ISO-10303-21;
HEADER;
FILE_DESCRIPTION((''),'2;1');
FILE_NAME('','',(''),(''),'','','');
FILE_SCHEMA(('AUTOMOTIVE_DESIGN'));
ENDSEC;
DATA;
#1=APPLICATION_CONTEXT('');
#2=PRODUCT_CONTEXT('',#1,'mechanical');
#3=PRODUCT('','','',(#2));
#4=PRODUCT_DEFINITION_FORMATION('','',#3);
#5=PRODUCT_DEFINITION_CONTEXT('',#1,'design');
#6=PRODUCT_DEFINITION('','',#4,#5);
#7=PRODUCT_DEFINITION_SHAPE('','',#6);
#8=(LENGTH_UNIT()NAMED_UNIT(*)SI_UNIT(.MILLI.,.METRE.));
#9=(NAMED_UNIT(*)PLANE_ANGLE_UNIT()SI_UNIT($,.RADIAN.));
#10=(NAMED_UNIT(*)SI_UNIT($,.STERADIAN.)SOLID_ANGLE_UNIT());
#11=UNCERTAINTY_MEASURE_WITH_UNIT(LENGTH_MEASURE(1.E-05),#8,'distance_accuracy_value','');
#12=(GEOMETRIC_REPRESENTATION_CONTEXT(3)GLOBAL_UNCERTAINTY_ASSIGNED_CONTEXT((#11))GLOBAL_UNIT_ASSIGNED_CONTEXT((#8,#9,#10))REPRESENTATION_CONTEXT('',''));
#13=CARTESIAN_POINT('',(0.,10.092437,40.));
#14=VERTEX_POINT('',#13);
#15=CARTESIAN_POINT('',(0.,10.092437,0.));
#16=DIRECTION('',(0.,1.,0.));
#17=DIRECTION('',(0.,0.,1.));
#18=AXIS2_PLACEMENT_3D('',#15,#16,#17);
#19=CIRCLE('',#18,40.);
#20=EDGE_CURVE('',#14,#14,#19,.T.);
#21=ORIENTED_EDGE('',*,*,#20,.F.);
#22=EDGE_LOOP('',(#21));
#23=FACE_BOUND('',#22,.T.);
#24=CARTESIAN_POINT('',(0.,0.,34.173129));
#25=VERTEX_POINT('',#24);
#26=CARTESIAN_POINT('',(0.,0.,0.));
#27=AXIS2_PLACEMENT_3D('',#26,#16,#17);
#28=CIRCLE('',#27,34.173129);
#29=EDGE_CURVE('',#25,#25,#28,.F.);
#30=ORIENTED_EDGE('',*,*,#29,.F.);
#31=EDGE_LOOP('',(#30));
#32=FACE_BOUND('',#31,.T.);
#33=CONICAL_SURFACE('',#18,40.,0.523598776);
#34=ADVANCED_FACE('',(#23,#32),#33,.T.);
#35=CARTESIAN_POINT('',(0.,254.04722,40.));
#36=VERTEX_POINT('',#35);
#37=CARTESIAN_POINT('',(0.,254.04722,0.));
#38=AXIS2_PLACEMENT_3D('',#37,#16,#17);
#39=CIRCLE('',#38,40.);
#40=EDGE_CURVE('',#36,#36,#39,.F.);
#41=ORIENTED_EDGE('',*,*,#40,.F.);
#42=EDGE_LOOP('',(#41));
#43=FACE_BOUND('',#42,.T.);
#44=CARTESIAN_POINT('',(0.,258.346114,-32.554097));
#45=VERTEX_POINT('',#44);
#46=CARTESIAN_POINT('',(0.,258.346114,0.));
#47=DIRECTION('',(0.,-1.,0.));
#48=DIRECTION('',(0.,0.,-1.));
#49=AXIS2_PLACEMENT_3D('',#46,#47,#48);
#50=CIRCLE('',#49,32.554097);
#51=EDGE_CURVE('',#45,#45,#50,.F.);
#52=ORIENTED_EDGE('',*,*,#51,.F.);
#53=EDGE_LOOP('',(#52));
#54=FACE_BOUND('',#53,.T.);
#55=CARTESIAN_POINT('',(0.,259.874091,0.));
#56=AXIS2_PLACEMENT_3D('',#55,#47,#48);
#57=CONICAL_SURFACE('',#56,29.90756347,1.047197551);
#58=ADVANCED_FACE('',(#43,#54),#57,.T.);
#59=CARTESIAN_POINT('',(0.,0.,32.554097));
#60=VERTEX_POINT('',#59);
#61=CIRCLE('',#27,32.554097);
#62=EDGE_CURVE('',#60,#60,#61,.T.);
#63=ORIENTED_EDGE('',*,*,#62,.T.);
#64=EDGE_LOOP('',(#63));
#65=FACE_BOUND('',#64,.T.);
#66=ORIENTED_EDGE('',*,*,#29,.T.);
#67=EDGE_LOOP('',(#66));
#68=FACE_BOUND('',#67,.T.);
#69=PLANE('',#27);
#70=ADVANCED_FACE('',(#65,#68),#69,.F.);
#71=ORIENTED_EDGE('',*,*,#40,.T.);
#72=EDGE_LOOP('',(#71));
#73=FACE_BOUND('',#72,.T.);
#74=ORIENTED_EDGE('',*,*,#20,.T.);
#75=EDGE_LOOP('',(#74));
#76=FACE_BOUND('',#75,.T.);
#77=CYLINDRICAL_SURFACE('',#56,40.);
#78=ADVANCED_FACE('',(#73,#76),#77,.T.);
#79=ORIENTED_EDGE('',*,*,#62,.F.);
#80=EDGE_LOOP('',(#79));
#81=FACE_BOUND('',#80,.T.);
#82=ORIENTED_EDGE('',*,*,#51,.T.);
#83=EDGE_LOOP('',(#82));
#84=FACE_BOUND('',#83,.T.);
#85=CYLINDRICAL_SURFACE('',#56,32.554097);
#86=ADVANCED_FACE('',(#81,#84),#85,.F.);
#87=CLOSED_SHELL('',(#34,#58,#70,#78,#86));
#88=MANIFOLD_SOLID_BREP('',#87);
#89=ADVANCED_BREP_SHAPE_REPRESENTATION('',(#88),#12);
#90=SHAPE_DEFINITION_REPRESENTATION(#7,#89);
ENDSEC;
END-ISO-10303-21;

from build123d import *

# Parameters (mm, degrees)
SKETCH1_R           = 40
BOSS_EXTRUDE1_DEPTH = 259.874091
SKETCH2_R           = 32.554097406
CUT_EXTRUDE1_DEPTH  = 266.95966456
CHAMFER1_SIZE       = 5.826871
CHAMFER1_SIZE_2     = 10.092437


with BuildPart() as part:
    # Sketch1 → Boss-Extrude1 (new body)
    with BuildSketch(Plane(origin=(0, 0, 0), x_dir=(1, 0, 0), z_dir=(0, 1, 0))):
        with Locations(Location((0, 0, 0), (0, 0, 270))):
            Circle(SKETCH1_R)
    extrude(amount=BOSS_EXTRUDE1_DEPTH)

    # Sketch2 → Cut-Extrude1 (cut, through all)
    with BuildSketch(Plane(origin=(0, 0, 0), x_dir=(1, 0, 0), z_dir=(0, 1, 0))):
        with Locations(Location((0, 0, 0), (0, 0, 270))):
            Circle(SKETCH2_R)
    extrude(amount=CUT_EXTRUDE1_DEPTH, mode=Mode.SUBTRACT)

    # Chamfer1
    # the kernel refuses this chamfer: 10.092437, 5.826871 mm, written as the material it takes off along each edge
    with BuildSketch(Plane(origin=(0, 259.874091, 0), x_dir=(0, 0, 1), z_dir=(-1, 0, 0))) as chamfer1_piece_1:
        Polygon((40, -CHAMFER1_SIZE), (40 - CHAMFER1_SIZE_2, 0), (40, 0), align=None)
    revolve(axis=Axis((0, 259.874091, 0), (0, 1, 0)), mode=Mode.SUBTRACT)
    with BuildSketch(Plane(origin=(0, 0, 0), x_dir=(0, 0, 1), z_dir=(-1, 0, 0))) as chamfer1_piece_2:
        Polygon((40, CHAMFER1_SIZE_2), (40 - CHAMFER1_SIZE, 0), (40, 0), align=None)
    revolve(axis=Axis((0, 0, 0), (0, 1, 0)), mode=Mode.SUBTRACT)


solid = part.part
